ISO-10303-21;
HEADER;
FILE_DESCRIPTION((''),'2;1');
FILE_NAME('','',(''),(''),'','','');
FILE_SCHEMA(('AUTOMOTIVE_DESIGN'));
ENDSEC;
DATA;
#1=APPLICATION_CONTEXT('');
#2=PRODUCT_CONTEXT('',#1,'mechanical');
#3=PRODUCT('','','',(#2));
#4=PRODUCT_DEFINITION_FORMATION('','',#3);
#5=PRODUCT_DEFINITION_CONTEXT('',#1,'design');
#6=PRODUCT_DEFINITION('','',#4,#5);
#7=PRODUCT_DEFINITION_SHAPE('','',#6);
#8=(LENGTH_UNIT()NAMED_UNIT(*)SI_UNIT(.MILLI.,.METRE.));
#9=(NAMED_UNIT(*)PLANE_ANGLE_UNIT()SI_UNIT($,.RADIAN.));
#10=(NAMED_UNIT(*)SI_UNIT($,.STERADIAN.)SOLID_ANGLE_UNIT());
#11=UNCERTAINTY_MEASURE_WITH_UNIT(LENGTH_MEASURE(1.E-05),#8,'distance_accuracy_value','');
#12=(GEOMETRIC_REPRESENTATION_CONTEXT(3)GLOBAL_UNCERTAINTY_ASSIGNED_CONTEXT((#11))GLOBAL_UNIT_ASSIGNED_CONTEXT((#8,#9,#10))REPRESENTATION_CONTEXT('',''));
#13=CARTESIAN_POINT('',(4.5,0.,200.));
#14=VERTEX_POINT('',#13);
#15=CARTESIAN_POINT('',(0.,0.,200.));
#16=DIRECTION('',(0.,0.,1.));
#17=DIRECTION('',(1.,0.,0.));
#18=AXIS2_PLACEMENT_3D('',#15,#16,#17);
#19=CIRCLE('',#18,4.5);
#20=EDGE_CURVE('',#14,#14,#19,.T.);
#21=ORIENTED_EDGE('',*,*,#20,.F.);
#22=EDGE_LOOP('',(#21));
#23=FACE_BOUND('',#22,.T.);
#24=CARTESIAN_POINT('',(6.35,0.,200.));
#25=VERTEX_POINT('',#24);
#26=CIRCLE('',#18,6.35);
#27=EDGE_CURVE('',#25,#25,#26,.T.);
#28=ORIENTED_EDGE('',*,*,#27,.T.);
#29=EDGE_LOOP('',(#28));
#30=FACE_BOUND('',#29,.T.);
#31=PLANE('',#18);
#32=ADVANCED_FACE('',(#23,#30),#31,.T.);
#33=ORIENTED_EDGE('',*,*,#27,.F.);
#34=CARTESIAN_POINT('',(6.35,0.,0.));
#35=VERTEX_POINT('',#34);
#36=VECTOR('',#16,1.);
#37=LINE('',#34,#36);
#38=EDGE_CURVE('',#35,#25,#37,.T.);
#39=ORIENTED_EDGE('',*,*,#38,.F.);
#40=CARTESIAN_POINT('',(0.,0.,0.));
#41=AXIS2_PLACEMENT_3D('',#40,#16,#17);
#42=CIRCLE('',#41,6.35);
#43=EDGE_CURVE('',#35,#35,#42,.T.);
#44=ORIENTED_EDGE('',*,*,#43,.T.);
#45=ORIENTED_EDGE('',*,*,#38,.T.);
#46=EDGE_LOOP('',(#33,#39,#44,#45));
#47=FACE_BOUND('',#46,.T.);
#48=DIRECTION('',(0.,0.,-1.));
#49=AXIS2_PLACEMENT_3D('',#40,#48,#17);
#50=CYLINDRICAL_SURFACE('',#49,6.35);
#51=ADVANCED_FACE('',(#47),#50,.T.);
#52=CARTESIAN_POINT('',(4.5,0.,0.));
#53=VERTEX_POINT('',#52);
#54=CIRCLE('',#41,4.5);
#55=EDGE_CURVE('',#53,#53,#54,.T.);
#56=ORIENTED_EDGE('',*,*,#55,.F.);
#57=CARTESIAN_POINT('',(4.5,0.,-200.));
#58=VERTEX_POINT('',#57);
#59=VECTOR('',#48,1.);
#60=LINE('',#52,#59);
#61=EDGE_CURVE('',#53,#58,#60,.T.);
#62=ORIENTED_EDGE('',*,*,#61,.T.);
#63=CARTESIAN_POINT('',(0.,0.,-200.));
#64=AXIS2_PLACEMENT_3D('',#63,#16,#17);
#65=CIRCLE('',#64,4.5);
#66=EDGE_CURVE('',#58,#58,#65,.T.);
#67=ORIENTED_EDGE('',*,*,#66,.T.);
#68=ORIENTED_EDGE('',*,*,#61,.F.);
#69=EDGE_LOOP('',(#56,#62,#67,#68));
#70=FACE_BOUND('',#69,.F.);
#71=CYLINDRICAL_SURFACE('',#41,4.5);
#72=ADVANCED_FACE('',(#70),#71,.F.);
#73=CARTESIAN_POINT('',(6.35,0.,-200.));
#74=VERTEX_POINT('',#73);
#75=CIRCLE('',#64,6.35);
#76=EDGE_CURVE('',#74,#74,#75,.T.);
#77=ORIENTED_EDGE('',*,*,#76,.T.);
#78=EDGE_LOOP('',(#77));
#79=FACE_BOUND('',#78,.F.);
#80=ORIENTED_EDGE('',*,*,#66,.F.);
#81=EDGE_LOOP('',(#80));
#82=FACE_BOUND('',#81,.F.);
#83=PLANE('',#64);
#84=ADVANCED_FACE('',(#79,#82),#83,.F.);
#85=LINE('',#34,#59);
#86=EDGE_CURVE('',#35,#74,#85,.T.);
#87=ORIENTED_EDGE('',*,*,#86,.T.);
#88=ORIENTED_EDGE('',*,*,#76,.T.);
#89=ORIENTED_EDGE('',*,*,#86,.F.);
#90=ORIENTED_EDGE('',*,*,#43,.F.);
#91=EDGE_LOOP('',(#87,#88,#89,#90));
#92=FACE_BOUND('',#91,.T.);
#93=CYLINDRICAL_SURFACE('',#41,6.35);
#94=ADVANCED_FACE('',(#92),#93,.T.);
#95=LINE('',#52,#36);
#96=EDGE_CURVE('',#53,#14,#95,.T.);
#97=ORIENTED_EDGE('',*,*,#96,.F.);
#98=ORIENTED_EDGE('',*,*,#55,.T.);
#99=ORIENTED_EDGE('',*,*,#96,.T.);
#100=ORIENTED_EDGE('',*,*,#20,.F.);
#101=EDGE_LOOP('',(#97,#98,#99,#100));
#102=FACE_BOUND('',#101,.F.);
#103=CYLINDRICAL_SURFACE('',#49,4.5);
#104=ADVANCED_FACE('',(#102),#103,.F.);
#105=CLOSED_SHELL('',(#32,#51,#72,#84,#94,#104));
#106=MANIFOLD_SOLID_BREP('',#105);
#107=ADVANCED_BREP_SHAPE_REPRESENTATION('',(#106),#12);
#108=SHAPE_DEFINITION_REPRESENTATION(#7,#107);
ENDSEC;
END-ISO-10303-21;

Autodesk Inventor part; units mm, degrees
ref_plane "YZ Plane" through (0, 0, 0) normal (1, 0, 0) x (0, 1, 0)
ref_plane "XZ Plane" through (0, 0, 0) normal (0, 1, 0) x (-1, 0, 0)
ref_plane "XY Plane" through (0, 0, 0) normal (0, 0, 1) x (1, 0, 0)
sketch "Sketch1" plane through (0, 0, 0) normal (0, 0, 1) x (1, 0, 0)
  circle A0 centre (0, 0) radius 6.35
  circle A1 centre (0, 0) radius 4.5
  dimension "d0" = 12.7
  dimension "d1" = 9
extrude "Extrusion1" add sketch "Sketch1" along normal mid plane 400
thread "Thread1" size "M14x2" class "6g" standard "ANSI Metric M Profile" length 37
properties part number "Adapter shaft"
